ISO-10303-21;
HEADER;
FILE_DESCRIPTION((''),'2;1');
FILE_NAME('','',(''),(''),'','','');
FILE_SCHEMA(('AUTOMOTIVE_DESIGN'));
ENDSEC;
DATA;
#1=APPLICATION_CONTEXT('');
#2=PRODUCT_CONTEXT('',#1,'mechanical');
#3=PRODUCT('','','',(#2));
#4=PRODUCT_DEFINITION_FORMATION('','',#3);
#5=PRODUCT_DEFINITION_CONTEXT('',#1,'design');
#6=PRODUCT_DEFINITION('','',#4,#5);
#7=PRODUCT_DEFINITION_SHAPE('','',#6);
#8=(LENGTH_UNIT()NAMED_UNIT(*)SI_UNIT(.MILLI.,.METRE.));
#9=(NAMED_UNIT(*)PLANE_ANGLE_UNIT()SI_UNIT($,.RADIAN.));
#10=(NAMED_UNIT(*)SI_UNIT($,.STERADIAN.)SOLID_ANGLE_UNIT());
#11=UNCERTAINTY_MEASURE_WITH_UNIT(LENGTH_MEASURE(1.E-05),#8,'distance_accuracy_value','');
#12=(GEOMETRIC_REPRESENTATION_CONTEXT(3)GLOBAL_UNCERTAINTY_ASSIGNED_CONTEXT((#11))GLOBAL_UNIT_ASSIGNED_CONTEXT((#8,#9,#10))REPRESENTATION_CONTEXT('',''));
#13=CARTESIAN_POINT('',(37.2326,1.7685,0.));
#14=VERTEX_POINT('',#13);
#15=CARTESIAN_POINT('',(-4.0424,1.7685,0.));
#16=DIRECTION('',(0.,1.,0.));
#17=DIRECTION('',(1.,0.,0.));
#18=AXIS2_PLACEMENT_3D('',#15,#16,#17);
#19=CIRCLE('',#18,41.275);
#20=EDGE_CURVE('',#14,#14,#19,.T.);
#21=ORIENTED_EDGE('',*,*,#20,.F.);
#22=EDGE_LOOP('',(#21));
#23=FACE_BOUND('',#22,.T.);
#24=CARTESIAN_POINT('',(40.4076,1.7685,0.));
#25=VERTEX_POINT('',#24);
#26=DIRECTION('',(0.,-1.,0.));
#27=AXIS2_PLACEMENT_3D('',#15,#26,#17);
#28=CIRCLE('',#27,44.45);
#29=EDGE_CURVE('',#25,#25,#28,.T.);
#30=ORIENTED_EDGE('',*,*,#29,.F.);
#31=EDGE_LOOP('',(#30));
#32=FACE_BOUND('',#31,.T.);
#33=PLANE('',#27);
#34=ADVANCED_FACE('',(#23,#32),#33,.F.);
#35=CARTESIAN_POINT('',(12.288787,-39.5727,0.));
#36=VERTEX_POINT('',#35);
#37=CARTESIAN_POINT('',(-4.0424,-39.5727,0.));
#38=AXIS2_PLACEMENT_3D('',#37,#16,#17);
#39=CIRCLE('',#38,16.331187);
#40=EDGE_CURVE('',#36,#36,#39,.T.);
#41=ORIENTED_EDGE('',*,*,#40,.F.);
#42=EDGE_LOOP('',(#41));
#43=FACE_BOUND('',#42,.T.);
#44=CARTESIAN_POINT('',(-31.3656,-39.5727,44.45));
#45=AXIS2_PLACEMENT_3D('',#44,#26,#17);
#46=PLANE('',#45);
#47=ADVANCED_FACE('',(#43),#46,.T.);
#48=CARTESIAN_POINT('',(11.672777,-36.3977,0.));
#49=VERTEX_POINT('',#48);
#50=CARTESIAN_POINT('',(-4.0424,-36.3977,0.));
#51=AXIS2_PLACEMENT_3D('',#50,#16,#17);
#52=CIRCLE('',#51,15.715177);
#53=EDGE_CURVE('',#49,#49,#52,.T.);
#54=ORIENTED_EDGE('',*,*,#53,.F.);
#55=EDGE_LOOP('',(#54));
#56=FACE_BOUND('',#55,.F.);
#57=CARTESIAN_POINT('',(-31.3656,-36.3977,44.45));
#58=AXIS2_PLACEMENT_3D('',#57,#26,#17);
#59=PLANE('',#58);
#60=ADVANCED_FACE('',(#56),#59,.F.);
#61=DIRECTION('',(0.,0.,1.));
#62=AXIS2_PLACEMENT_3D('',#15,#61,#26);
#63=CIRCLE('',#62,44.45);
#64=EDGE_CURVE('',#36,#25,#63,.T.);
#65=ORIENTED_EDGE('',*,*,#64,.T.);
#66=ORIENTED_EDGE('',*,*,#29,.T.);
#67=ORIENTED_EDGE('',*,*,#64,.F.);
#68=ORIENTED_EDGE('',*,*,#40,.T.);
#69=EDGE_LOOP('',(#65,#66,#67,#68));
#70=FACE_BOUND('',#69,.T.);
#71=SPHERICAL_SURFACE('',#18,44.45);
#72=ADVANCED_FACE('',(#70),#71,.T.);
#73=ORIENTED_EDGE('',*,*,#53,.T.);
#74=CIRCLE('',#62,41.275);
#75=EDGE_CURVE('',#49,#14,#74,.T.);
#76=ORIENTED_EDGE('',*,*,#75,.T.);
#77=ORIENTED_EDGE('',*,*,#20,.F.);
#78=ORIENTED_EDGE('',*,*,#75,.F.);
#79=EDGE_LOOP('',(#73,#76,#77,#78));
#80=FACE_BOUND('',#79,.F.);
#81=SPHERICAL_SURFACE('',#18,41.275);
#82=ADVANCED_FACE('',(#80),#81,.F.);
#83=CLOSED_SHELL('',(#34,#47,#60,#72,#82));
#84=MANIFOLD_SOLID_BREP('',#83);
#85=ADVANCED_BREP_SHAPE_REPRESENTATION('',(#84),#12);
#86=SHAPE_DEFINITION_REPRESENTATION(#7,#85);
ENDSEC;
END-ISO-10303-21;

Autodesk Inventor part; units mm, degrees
ref_plane "YZ Plane" through (0, 0, 0) normal (1, 0, 0) x (0, 1, 0)
ref_plane "XZ Plane" through (0, 0, 0) normal (0, 1, 0) x (-1, 0, 0)
sketch "Sketch1" plane through (0, 0, 0) normal (0, 0, 1) x (1, 0, 0)
  arc A0 (-4.0424, -42.6815) -> (40.4076, 1.7685) centre (-4.0424, 1.7685) ccw
  line L0 (-4.0424, 1.7685) -> (40.4076, 1.7685)
  line L1 (-4.0424, 1.7685) -> (-4.0424, -42.6815)
  dimension "d0" = 88.9
revolve "Revolution1" add sketch "Sketch1" angle 360 about axis through (-4.0424, 1.7685, 0) along (0, -1, 0)
ref_plane "Work Plane2" through (-4.0424, 1.7685, 44.45) normal (0, 0, 1) x (1, 0, 0)
sketch "Sketch3" plane through (-4.0424, 1.7685, 44.45) normal (0, 0, 1) x (1, 0, 0)
  line L0 (-27.3232, -41.3412) -> (29.0699, -41.3412)
surface extrude "ExtrusionSrf2" sketch "Sketch3" against normal blind 127 shown no curves L0
split body "Split2" result one side removed by surface "ExtrusionSrf2" removed pieces at (7.0948, -40.569, -3.8851)
shell "Shell2" thickness 3.175 removed faces 1 at (-16.0293, 1.7685, -8.709)
properties part number "ORB-bottom"
